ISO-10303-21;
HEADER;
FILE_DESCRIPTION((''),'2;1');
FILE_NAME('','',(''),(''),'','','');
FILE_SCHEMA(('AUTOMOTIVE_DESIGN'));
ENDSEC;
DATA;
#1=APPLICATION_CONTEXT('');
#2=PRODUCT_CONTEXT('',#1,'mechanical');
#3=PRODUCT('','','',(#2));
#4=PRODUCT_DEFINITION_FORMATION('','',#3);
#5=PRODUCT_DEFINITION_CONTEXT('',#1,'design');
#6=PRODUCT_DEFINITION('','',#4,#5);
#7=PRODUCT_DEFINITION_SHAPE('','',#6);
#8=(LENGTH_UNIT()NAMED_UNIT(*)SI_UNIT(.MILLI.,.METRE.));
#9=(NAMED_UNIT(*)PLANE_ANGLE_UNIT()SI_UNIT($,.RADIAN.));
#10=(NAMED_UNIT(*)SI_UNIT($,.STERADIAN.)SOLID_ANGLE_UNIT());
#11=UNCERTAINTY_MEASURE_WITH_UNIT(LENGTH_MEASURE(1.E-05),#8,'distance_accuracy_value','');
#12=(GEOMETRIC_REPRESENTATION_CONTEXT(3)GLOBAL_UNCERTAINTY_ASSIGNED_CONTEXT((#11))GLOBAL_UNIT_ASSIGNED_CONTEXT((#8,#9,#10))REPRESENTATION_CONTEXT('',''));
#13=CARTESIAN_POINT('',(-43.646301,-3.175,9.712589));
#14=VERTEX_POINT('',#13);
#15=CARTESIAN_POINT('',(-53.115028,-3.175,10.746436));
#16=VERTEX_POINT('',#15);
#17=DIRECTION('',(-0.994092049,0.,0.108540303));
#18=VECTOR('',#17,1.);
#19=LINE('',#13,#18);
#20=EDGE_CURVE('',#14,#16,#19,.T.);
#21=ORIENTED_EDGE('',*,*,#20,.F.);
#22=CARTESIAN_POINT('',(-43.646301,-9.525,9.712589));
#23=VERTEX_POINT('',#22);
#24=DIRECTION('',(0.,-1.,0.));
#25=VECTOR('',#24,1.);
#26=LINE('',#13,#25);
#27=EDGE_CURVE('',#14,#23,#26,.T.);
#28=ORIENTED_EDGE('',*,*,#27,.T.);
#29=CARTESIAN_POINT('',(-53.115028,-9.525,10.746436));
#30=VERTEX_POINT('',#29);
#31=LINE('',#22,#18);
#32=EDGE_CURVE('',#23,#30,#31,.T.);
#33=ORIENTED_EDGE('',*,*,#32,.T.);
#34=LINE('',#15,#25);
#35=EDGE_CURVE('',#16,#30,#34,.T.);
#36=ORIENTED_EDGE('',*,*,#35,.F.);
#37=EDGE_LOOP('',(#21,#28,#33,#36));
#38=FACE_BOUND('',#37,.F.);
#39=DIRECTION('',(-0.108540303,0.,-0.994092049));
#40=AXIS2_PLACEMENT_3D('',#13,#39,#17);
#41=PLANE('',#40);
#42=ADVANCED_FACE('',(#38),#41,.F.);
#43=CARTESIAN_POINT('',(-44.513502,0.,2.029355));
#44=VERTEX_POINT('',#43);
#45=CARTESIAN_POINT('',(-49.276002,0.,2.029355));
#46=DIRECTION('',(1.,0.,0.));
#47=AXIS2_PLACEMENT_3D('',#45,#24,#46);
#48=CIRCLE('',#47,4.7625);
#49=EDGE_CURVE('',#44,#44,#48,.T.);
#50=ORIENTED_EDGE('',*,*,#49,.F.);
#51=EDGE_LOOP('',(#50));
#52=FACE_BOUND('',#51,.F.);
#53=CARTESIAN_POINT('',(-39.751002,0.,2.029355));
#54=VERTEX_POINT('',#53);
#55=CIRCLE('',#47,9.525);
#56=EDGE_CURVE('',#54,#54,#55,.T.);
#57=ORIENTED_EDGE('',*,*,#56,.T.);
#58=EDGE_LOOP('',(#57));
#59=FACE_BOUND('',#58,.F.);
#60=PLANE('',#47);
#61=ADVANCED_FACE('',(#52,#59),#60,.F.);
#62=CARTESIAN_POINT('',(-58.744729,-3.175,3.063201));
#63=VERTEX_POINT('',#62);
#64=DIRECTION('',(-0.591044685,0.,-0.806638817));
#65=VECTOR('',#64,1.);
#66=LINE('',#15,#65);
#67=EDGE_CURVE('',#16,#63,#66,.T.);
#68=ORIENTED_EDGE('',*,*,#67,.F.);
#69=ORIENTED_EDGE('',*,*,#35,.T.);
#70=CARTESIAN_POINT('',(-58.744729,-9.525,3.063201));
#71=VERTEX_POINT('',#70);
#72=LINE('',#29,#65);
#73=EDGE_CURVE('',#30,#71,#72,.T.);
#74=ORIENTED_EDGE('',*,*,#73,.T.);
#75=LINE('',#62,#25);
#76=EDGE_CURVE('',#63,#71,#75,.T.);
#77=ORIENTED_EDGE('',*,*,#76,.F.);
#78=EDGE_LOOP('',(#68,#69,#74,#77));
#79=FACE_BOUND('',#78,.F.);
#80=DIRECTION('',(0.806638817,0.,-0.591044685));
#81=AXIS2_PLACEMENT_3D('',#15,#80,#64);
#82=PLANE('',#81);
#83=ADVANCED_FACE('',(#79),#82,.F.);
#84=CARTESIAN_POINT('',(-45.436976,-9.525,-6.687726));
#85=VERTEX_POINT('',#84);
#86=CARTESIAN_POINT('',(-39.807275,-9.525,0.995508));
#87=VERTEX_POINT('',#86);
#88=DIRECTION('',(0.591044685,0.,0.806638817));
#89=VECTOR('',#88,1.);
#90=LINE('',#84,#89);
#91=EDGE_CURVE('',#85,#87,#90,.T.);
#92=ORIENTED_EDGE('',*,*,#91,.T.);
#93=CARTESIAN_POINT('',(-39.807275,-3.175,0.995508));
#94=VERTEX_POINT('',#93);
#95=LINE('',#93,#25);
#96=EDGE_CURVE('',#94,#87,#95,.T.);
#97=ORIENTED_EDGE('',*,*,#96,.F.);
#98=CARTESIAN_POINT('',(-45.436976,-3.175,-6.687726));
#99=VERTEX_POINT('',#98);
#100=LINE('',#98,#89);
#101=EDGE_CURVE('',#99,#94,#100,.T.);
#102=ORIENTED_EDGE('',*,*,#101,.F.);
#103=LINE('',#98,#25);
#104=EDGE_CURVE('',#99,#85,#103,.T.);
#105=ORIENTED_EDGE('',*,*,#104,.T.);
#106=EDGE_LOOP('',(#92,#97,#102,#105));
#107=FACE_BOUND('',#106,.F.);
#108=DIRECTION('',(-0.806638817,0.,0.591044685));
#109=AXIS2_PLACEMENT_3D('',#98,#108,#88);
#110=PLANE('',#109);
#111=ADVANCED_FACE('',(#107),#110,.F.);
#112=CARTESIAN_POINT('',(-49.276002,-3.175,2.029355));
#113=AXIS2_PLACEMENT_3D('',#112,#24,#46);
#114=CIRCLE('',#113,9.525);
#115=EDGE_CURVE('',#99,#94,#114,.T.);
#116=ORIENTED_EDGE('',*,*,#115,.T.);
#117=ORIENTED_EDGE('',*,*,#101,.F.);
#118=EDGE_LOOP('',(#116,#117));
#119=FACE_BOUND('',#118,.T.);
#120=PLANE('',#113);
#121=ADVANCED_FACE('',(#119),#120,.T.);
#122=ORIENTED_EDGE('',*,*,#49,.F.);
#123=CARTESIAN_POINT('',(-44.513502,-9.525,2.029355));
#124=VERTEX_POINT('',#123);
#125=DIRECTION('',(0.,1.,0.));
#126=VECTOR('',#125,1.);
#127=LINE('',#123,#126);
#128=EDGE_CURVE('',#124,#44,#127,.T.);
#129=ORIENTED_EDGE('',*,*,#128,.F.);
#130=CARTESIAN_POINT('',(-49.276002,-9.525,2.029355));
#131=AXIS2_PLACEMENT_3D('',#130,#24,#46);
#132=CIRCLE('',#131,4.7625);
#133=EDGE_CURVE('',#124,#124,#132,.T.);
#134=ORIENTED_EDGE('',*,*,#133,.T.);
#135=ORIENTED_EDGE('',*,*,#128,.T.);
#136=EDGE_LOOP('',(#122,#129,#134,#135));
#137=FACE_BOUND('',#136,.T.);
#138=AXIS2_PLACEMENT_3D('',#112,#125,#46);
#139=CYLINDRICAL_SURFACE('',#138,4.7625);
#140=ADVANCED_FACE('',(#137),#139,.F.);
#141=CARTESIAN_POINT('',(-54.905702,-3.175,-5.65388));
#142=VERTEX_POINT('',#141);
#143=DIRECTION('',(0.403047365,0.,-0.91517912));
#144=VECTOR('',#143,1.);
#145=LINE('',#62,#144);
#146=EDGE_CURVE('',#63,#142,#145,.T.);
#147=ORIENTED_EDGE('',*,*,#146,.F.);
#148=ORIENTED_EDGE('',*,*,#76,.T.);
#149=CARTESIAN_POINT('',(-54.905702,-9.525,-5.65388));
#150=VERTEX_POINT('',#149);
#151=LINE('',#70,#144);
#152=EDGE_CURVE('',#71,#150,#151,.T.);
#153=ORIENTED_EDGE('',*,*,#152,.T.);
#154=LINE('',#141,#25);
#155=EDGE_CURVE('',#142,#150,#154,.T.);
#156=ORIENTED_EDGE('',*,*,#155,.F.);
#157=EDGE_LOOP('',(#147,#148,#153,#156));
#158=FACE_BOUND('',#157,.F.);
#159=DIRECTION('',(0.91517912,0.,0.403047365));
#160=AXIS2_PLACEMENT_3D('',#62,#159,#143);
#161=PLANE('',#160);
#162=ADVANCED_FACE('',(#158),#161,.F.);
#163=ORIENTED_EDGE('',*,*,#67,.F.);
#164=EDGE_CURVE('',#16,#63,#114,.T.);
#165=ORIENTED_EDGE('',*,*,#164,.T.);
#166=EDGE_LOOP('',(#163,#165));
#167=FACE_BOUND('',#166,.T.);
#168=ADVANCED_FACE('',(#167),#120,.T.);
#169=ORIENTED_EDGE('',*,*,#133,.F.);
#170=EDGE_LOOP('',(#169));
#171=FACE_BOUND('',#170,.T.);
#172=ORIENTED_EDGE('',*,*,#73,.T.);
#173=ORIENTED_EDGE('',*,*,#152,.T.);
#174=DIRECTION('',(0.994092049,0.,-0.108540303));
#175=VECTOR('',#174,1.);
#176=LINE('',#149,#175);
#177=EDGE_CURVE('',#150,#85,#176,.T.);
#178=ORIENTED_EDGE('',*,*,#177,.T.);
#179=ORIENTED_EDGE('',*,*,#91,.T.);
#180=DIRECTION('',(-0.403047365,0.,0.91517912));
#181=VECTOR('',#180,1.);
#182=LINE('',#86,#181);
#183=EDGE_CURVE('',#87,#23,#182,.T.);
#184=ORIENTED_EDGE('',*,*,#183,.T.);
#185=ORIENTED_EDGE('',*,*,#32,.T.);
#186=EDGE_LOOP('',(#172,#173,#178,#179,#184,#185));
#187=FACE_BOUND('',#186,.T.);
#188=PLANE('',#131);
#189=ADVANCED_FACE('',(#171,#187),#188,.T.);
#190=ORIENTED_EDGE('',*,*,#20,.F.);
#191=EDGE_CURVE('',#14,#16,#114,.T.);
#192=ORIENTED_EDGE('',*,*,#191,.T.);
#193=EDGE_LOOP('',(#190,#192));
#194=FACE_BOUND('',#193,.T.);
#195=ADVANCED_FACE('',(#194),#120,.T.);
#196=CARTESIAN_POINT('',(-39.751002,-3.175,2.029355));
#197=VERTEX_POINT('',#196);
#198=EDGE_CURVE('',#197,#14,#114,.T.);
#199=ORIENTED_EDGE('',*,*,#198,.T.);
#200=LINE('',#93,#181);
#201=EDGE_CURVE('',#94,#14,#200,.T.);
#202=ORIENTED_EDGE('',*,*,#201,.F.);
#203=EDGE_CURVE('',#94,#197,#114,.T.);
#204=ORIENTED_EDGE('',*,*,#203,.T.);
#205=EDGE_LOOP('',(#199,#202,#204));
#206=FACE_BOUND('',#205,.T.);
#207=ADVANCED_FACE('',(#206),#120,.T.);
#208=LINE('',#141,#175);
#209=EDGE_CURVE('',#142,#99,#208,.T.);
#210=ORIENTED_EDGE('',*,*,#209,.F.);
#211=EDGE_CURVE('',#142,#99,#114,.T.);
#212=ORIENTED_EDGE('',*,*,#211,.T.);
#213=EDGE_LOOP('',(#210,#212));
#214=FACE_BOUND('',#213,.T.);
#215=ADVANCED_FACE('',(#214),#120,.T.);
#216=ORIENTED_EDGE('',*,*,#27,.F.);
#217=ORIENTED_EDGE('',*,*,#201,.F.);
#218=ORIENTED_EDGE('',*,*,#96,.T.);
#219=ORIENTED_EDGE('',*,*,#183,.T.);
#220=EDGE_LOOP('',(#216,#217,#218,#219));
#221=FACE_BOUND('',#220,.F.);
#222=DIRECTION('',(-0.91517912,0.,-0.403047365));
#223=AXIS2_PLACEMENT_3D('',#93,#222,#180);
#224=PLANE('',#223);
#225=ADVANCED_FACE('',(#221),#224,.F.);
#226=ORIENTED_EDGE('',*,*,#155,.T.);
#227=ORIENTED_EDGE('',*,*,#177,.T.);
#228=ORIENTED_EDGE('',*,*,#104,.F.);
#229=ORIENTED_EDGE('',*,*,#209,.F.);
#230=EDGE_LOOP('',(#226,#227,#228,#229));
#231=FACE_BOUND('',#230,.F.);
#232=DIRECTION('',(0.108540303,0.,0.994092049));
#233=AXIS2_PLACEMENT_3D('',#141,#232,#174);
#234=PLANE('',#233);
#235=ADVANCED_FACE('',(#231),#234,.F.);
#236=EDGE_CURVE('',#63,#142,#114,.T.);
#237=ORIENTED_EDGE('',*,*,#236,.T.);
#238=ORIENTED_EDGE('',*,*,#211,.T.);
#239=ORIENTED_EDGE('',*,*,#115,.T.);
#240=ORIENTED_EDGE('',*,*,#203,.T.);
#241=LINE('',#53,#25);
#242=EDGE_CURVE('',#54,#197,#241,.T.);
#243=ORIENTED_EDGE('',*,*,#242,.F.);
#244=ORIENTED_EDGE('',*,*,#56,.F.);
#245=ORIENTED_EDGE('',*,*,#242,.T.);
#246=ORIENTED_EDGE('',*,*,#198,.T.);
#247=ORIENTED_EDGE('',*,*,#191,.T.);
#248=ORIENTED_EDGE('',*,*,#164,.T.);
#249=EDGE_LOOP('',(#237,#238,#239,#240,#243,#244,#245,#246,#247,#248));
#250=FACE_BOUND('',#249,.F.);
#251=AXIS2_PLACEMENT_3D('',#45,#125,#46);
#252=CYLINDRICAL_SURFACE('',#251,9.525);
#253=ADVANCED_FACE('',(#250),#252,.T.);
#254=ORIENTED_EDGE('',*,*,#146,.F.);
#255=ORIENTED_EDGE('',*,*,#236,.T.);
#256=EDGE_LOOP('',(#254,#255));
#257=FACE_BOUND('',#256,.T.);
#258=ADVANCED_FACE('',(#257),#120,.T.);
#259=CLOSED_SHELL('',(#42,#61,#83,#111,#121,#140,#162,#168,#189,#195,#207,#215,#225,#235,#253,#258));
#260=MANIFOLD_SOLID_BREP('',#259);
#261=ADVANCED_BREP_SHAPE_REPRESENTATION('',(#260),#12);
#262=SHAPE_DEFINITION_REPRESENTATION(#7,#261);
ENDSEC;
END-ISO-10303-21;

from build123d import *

# Parameters (mm, degrees)
F0_R     = 9.525
F0_R_2   = 4.7625
F1_DEPTH = 3.175
F2_R     = 4.7625
F3_DEPTH = 6.35


# Not quite as in the source:
# - a feature names something its author has since deleted; it is built from what else it names


with BuildPart() as f1:
    # F0 (on Front) → F1 (new body)
    with BuildSketch(Plane.XZ):
        with Locations((-49.2760017514, 2.0293546841)):
            Circle(F0_R)
        with Locations((-49.2760017514, 2.0293546841)):
            Circle(F0_R_2, mode=Mode.SUBTRACT)
    extrude(amount=F1_DEPTH)

    # F2 (on face) → F3 (join)
    with BuildSketch(Plane.XZ.offset(3.175)):
        Polygon((-39.8072749816, 0.9955082934), (-43.6463011287, 9.7125894129), (-53.1150278984, 10.7464358035), (-58.7447285212, 3.0632010747), (-54.9057023742, -5.6538800448), (-45.4369756044, -6.6877264354), align=None)
        with Locations((-49.2760017514, 2.0293546841)):
            Circle(F2_R, mode=Mode.SUBTRACT)
    extrude(amount=F3_DEPTH)


solid = f1.part
